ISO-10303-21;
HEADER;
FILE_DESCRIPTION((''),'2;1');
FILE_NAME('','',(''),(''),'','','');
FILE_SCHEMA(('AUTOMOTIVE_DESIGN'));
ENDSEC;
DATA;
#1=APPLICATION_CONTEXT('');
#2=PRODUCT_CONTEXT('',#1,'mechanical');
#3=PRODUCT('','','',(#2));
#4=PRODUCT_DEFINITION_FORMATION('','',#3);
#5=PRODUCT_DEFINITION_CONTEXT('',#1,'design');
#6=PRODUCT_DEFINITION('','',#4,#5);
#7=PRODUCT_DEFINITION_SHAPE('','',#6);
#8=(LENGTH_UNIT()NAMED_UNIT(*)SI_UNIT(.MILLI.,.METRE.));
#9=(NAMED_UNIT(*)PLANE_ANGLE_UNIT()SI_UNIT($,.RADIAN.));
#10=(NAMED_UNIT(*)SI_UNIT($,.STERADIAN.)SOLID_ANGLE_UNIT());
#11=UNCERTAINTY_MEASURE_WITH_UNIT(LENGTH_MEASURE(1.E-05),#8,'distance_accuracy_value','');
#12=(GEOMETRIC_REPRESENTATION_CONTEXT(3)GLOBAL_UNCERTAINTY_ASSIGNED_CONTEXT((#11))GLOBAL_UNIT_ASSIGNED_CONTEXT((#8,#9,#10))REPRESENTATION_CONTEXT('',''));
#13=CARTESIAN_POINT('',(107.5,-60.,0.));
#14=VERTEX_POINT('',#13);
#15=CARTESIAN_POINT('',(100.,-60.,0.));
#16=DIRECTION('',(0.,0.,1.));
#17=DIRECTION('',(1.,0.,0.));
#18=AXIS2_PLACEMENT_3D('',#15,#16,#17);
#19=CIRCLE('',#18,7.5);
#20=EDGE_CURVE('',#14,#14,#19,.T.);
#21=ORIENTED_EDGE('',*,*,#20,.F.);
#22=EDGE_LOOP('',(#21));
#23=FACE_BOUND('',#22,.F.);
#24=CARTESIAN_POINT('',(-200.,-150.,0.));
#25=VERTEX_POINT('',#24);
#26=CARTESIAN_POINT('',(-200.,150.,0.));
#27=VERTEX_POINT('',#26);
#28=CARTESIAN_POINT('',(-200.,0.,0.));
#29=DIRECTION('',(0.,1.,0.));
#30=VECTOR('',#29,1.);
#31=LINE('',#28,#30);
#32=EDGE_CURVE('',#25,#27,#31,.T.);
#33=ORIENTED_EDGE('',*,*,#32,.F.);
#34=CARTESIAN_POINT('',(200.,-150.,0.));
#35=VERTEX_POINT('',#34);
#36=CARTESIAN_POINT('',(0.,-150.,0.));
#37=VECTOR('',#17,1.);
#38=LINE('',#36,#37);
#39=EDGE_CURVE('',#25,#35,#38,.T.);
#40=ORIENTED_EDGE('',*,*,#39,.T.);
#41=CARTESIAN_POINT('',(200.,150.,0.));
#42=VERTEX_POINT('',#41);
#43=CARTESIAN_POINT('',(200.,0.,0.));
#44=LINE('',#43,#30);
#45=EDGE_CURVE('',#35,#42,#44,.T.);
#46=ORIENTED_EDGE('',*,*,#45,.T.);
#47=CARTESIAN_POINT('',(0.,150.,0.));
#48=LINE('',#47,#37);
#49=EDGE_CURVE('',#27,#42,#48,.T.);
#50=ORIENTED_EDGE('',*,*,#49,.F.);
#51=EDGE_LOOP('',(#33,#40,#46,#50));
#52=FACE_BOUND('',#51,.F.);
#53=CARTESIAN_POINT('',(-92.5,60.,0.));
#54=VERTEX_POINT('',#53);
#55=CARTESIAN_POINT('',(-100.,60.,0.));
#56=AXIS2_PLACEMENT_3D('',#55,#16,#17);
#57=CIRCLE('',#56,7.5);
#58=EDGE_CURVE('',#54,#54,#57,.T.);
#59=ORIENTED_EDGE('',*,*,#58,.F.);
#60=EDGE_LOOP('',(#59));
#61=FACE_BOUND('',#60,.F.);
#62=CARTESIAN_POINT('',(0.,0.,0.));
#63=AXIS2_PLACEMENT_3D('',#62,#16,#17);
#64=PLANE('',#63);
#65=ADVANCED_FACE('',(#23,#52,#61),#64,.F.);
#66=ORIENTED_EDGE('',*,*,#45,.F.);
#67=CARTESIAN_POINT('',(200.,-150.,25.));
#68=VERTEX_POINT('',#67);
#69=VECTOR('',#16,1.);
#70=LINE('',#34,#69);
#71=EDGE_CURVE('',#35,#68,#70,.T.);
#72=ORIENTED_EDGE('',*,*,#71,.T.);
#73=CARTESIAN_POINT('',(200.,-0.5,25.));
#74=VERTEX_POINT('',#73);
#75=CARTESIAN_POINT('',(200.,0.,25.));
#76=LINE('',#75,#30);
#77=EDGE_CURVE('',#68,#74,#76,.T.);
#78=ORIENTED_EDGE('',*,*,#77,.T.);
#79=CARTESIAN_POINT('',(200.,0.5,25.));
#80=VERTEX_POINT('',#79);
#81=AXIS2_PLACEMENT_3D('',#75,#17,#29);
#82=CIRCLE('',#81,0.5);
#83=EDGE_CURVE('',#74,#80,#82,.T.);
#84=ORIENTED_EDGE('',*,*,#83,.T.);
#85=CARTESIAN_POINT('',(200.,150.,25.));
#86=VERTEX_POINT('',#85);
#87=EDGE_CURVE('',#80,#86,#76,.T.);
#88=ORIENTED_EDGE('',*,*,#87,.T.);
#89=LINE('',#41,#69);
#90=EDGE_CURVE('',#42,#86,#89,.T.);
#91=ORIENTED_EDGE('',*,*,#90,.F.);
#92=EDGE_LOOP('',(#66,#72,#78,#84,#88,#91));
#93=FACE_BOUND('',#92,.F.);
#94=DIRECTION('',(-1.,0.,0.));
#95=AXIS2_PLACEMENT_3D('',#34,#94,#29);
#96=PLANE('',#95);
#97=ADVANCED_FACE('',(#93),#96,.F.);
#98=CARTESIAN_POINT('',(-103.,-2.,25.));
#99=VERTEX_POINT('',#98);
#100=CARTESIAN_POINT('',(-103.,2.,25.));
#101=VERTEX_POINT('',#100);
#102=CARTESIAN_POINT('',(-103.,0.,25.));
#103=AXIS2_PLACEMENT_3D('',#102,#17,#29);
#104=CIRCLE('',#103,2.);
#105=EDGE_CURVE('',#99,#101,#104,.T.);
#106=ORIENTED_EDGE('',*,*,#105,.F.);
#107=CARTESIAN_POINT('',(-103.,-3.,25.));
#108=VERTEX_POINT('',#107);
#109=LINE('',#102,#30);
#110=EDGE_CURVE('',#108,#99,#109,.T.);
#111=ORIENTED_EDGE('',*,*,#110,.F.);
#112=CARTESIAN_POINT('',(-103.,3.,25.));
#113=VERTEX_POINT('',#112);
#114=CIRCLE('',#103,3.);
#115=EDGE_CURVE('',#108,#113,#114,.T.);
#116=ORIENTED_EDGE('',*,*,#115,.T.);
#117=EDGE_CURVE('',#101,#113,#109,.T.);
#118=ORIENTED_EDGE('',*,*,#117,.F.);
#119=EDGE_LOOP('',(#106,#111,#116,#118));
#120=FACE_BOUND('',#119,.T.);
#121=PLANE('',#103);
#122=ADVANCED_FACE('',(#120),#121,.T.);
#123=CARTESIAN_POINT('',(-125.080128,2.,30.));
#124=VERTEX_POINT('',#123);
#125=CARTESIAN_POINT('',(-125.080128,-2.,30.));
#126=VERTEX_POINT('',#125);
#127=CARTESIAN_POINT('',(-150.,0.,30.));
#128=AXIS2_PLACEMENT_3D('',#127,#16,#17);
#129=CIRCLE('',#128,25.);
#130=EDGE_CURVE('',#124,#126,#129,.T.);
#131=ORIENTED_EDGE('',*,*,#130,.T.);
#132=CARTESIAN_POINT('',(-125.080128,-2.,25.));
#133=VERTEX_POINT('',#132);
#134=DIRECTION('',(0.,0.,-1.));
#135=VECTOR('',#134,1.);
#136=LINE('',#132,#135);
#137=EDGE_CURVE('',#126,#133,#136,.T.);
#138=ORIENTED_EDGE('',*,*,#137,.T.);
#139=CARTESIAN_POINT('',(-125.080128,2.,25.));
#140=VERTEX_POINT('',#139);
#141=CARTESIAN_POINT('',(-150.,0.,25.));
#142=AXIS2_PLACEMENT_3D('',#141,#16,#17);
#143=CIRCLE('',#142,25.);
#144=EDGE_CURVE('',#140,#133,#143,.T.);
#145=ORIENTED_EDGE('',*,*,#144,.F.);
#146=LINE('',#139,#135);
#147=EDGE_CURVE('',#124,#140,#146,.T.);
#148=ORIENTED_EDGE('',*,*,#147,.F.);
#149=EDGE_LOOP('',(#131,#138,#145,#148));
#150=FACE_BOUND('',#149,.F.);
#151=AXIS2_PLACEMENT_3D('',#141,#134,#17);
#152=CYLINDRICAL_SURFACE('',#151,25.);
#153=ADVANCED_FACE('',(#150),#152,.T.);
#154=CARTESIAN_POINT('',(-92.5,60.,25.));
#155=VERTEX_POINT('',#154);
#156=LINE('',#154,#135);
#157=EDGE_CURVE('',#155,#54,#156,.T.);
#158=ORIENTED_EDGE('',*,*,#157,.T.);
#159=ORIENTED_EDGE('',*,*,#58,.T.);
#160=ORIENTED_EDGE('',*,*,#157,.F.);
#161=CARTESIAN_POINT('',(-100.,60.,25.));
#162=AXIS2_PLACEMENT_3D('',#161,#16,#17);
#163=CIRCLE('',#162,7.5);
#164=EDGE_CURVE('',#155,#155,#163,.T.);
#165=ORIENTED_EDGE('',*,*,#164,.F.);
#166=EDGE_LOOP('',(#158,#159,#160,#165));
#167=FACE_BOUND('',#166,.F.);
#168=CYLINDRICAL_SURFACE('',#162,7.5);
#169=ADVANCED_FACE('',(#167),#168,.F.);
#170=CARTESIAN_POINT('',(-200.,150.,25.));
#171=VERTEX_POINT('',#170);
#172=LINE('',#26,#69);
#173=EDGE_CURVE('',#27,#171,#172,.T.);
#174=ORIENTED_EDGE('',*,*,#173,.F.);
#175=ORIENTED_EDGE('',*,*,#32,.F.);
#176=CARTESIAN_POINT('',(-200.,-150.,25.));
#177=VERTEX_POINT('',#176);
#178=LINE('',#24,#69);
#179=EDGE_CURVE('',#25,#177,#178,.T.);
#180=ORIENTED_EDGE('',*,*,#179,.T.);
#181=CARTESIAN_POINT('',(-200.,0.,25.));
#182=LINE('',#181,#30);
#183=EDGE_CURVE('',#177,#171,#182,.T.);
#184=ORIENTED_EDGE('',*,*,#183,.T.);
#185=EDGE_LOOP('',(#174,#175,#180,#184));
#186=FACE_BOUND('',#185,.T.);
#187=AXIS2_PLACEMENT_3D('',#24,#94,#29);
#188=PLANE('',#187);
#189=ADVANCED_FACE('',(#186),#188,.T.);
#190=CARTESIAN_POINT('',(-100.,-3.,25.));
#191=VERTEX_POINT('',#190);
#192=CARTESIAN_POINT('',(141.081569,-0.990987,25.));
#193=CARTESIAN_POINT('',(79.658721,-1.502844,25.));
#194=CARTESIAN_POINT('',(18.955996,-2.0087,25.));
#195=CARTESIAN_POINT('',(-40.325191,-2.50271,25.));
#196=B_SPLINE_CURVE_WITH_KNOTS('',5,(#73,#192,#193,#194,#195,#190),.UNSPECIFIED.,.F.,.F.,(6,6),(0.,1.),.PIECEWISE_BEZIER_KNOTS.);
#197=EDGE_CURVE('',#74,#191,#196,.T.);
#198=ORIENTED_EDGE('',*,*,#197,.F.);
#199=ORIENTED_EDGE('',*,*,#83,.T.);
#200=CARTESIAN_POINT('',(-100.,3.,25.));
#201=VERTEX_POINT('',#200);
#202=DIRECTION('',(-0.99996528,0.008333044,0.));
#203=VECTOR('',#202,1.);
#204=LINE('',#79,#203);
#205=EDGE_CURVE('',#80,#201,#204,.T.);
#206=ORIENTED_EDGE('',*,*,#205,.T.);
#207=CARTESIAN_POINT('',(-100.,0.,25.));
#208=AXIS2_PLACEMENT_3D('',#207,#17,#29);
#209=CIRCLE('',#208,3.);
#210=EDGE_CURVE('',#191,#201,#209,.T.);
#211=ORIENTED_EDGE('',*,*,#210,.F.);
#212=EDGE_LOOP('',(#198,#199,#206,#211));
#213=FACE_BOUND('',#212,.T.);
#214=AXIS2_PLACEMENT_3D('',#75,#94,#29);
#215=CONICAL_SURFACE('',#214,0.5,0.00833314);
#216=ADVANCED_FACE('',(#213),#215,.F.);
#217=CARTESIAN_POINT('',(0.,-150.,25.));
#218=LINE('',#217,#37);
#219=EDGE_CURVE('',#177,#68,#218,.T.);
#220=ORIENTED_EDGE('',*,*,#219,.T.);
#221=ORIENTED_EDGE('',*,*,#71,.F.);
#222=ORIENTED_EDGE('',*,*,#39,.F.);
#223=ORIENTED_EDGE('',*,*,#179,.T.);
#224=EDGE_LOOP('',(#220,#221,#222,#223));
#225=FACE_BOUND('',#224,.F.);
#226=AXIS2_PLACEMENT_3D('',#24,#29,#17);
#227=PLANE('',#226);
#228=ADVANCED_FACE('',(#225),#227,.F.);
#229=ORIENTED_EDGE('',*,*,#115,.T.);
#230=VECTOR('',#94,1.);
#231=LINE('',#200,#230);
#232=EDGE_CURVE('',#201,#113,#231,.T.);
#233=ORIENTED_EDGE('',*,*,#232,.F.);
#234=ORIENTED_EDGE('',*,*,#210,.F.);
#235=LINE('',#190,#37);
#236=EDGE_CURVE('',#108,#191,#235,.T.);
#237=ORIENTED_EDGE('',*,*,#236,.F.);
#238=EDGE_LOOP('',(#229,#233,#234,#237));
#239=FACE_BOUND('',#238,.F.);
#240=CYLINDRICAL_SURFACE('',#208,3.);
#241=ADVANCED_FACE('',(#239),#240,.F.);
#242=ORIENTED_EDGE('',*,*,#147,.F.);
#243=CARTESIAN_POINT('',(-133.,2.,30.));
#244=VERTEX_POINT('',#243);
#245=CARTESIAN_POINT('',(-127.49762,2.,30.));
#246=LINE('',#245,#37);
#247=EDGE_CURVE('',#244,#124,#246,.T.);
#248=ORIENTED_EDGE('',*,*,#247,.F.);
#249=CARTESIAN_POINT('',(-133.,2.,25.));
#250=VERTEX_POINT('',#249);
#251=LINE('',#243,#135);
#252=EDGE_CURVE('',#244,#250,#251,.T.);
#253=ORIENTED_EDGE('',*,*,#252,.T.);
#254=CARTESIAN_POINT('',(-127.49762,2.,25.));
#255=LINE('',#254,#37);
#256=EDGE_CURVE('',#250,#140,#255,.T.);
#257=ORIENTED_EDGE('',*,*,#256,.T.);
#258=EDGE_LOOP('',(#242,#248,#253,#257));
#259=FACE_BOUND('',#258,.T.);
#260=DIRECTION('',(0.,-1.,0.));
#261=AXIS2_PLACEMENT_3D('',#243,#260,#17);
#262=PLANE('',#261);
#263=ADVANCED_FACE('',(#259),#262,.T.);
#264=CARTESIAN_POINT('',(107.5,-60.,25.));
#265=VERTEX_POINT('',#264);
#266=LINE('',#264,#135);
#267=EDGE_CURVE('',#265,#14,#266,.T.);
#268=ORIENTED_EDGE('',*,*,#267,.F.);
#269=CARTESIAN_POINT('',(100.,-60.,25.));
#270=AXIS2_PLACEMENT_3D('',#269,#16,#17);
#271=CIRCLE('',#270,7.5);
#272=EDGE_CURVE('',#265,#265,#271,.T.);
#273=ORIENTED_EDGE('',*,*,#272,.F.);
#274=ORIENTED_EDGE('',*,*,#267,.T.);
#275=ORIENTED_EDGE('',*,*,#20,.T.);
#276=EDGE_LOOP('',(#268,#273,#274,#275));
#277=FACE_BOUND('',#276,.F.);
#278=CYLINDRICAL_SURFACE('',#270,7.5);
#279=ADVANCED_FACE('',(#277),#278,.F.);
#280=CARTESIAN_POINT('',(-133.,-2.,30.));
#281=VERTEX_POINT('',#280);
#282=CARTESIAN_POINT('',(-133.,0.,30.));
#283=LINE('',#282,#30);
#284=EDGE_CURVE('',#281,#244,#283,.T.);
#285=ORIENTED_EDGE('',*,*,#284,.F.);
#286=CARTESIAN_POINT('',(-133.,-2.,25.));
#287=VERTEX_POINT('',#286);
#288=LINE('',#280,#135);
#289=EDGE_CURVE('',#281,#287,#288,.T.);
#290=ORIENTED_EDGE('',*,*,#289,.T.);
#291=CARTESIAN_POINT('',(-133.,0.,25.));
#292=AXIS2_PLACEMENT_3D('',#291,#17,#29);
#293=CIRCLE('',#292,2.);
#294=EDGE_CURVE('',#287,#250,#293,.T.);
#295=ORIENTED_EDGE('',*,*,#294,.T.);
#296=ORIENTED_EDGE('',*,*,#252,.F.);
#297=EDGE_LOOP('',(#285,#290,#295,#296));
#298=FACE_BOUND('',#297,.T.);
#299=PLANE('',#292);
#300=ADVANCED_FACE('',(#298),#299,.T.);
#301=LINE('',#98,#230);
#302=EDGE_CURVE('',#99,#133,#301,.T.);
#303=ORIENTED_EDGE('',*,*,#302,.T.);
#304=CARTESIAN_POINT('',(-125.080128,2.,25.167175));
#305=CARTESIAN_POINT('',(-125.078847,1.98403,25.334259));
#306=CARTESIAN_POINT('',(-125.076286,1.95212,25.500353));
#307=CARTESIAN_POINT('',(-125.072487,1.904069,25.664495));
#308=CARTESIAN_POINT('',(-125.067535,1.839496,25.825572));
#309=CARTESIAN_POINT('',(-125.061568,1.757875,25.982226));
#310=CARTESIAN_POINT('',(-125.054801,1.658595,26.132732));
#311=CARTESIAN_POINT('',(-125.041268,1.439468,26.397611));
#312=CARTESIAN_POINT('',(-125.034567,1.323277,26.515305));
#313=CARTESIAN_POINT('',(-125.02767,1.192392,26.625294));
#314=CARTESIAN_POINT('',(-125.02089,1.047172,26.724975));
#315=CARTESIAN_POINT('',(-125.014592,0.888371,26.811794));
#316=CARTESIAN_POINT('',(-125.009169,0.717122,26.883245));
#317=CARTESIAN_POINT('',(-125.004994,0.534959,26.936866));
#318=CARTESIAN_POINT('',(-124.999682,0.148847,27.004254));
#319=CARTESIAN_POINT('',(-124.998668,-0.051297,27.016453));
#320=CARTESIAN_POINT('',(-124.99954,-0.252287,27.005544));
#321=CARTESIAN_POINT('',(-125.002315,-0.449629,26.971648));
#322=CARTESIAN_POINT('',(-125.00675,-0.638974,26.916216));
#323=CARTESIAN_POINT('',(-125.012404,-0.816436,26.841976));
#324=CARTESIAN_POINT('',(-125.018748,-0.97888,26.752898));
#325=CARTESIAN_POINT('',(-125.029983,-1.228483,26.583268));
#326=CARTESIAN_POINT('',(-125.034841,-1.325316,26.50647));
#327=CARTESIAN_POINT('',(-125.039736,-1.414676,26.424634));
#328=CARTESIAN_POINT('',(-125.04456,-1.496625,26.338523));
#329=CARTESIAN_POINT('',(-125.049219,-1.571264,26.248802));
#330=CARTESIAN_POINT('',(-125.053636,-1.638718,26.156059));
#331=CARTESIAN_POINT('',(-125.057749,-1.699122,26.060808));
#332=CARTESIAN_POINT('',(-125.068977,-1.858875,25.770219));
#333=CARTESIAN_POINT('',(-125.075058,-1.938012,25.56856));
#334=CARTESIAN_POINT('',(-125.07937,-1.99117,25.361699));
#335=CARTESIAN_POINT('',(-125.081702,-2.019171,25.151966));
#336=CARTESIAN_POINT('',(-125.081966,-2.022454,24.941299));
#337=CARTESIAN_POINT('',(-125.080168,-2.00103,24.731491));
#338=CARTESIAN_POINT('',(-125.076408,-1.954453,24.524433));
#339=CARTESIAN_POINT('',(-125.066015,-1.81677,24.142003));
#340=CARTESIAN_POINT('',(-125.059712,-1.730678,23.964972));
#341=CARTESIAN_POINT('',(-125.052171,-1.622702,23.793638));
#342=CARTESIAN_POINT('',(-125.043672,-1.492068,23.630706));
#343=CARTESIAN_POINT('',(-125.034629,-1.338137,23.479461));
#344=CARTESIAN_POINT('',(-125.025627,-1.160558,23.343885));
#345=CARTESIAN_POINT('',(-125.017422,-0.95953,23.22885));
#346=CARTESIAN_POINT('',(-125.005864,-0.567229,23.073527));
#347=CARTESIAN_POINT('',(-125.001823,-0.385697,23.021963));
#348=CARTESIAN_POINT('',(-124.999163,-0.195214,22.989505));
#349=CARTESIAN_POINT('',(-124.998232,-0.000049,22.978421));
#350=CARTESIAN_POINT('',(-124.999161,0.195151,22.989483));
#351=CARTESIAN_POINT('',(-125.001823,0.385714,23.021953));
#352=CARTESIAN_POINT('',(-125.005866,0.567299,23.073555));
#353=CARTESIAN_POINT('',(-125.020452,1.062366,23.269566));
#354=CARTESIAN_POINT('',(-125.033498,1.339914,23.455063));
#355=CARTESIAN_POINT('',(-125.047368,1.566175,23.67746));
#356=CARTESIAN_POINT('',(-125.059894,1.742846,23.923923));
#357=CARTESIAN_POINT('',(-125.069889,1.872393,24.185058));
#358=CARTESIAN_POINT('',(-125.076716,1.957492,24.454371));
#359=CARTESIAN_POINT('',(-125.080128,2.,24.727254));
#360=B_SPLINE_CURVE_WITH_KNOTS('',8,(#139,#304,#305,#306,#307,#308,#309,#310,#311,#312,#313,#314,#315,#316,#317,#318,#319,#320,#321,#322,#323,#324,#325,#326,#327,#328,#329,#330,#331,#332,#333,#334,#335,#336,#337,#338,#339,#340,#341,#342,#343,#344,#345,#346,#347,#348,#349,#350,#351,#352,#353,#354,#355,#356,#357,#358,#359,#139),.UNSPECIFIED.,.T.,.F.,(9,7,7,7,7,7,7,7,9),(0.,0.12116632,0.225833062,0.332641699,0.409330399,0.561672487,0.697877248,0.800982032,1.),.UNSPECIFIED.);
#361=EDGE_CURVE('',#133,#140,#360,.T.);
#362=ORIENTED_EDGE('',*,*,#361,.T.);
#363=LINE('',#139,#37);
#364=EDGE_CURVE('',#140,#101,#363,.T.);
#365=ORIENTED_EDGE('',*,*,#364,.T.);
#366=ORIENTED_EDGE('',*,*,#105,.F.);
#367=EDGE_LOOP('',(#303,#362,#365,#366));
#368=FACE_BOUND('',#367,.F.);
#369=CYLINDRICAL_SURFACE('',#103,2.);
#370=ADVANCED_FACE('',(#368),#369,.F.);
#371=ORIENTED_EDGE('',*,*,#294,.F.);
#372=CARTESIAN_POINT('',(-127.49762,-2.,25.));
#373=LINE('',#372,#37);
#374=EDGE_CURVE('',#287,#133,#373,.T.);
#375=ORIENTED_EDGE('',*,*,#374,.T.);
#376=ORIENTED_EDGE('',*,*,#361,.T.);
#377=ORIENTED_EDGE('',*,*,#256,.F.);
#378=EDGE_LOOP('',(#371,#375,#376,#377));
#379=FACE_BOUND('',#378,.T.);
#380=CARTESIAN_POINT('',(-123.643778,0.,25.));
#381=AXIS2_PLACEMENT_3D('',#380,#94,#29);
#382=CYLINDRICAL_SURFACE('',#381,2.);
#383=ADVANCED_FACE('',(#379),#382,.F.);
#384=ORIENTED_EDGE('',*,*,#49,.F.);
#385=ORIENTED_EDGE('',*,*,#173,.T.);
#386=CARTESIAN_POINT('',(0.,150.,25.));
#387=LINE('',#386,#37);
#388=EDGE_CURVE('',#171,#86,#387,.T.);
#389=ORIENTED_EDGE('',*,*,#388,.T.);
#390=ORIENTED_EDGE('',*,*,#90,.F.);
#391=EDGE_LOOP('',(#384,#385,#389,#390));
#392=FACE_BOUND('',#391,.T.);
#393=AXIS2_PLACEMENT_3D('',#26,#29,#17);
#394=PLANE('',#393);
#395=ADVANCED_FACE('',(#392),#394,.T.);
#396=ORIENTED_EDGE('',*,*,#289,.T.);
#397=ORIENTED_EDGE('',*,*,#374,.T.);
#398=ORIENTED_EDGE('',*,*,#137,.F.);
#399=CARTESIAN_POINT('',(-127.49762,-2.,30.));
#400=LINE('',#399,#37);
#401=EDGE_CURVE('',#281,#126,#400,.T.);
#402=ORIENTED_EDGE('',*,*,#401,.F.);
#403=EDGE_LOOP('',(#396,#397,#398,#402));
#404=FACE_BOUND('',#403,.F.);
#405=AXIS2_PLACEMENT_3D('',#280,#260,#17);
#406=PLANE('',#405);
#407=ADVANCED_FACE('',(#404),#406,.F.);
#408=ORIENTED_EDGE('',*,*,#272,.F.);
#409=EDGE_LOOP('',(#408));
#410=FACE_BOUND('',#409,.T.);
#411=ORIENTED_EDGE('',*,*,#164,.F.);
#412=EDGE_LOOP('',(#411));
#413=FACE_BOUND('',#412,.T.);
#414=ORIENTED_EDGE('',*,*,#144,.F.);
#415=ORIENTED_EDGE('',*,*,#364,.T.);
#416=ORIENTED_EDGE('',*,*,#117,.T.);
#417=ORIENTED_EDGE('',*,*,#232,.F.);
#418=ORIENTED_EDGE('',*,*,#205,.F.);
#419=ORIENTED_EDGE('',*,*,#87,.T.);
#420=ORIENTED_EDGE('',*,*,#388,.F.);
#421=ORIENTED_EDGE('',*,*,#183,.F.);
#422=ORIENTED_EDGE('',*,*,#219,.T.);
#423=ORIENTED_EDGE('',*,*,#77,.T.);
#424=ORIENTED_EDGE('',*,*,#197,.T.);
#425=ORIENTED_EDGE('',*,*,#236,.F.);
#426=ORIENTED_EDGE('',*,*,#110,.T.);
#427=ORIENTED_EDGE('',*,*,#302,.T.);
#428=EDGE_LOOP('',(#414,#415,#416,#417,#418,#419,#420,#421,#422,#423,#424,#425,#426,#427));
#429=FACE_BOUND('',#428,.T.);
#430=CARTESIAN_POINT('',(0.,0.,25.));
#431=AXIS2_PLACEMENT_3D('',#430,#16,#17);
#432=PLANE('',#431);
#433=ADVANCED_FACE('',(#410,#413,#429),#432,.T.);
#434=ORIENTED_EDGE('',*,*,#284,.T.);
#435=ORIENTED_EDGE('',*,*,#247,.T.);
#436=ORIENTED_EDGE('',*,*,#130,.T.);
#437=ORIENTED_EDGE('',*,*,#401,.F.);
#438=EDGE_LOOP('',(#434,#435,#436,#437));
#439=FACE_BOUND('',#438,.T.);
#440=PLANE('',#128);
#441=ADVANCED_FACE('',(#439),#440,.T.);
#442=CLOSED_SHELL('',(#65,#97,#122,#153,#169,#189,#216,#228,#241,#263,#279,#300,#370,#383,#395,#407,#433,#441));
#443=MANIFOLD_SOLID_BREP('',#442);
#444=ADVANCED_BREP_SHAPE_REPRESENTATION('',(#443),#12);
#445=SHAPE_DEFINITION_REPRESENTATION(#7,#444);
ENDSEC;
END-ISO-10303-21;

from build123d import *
from build123d import SkipClean  # not in build123d's __all__

# Parameters (mm, degrees)
F0_W          = 400
F0_H          = 300
F1_DEPTH      = 25
F4_R          = 25
F5_DEPTH      = 5
F6_R          = 3
F7_DEPTH      = 3
F9_END_RADIUS = 25
F8_R          = 2
F9_REACH      = 102.6578543495
F10_W         = 11.0047593287
F10_H         = 4
F11_DEPTH     = 5
F14_R         = 7.5
F15_DEPTH     = 25.001


with BuildPart() as f1:
    # F0 (on Top) → F1 (new body)
    with BuildSketch(Plane.XY):
        Rectangle(F0_W, F0_H)
    extrude(amount=F1_DEPTH)

    # F2 (on face) → F3 (revolve, cut)
    with BuildSketch(Plane.XY.offset(25)):
        Polygon((200, 0), (200, 0.5), (-100, 3), (-100, 0), align=None)
    revolve(axis=Axis((50, 0, 25), (1, 0, 0)), mode=Mode.SUBTRACT)

    # F4 (on face) → F5 (join)
    with BuildSketch(Plane.XY.offset(25)):
        with Locations((-150, 0)):
            Circle(F4_R)
    extrude(amount=F5_DEPTH)

    # F6 (on face) → F7 (cut)
    with BuildSketch(Plane.YZ.offset(-100)):
        with Locations((0, 25)):
            Circle(F6_R)
    extrude(amount=-F7_DEPTH, mode=Mode.SUBTRACT)

    f9_end = (Plane(origin=(-150, 0, 27.5), x_dir=(-1, 0, 0), z_dir=(0, 0, -1)) * Cylinder(F9_END_RADIUS, 1207.1140921674, mode=Mode.PRIVATE)).faces().sort_by_distance((-175, 0, 27.5))[0]
    # F8 (on face) → F9 (cut, up to the whole of a round face its end follows)
    with BuildSketch(Plane.YZ.offset(-103)):
        with Locations((0, 25)):
            Circle(F8_R)
    f9_long = extrude(amount=-F9_REACH, mode=Mode.PRIVATE)
    add(split(f9_long, bisect_by=f9_end, keep=Keep.ALL, mode=Mode.PRIVATE).solids().sort_by_distance((-103, 0, 25))[0], mode=Mode.SUBTRACT)

    # F10 (on face) → F11 (cut)
    with BuildSketch(Plane.XY.offset(30)):
        with Locations((-127.4976203357, 0)):
            Rectangle(F10_W, F10_H)
    extrude(amount=-F11_DEPTH, mode=Mode.SUBTRACT)

    # F12 (on face) → F13 (revolve, cut)
    with BuildSketch(Plane.XY.offset(25)):
        with BuildLine():
            Line((-133, 2), (-133, 0))
            Line((-133, 0), (-125, 0))
            ThreePointArc((-125, 0), (-125.020040135, 1.0008022485), (-125.0801284112, 2))
            Line((-125.0801284112, 2), (-133, 2))
        make_face()
        with BuildLine():
            ThreePointArc((-125.0801284112, 2), (-125.020040135, 1.0008022485), (-125, 0))
            Line((-125, 0), (-123.6437782645, 0))
            Line((-123.6437782645, 0), (-123.6437782645, 2))
            Line((-123.6437782645, 2), (-125.0801284112, 2))
        make_face()
    revolve(axis=Axis((-128.3218891323, 0, 25), (1, 0, 0)), mode=Mode.SUBTRACT)

    # F14 (on face) → F15 (cut, through all)
    with BuildSketch(Plane.XY.offset(25)):
        with Locations((100, -60)):
            Circle(F14_R)
        with Locations((-100, 60)):
            Circle(F14_R)
    extrude(amount=-F15_DEPTH, mode=Mode.SUBTRACT)


solid = f1.part
